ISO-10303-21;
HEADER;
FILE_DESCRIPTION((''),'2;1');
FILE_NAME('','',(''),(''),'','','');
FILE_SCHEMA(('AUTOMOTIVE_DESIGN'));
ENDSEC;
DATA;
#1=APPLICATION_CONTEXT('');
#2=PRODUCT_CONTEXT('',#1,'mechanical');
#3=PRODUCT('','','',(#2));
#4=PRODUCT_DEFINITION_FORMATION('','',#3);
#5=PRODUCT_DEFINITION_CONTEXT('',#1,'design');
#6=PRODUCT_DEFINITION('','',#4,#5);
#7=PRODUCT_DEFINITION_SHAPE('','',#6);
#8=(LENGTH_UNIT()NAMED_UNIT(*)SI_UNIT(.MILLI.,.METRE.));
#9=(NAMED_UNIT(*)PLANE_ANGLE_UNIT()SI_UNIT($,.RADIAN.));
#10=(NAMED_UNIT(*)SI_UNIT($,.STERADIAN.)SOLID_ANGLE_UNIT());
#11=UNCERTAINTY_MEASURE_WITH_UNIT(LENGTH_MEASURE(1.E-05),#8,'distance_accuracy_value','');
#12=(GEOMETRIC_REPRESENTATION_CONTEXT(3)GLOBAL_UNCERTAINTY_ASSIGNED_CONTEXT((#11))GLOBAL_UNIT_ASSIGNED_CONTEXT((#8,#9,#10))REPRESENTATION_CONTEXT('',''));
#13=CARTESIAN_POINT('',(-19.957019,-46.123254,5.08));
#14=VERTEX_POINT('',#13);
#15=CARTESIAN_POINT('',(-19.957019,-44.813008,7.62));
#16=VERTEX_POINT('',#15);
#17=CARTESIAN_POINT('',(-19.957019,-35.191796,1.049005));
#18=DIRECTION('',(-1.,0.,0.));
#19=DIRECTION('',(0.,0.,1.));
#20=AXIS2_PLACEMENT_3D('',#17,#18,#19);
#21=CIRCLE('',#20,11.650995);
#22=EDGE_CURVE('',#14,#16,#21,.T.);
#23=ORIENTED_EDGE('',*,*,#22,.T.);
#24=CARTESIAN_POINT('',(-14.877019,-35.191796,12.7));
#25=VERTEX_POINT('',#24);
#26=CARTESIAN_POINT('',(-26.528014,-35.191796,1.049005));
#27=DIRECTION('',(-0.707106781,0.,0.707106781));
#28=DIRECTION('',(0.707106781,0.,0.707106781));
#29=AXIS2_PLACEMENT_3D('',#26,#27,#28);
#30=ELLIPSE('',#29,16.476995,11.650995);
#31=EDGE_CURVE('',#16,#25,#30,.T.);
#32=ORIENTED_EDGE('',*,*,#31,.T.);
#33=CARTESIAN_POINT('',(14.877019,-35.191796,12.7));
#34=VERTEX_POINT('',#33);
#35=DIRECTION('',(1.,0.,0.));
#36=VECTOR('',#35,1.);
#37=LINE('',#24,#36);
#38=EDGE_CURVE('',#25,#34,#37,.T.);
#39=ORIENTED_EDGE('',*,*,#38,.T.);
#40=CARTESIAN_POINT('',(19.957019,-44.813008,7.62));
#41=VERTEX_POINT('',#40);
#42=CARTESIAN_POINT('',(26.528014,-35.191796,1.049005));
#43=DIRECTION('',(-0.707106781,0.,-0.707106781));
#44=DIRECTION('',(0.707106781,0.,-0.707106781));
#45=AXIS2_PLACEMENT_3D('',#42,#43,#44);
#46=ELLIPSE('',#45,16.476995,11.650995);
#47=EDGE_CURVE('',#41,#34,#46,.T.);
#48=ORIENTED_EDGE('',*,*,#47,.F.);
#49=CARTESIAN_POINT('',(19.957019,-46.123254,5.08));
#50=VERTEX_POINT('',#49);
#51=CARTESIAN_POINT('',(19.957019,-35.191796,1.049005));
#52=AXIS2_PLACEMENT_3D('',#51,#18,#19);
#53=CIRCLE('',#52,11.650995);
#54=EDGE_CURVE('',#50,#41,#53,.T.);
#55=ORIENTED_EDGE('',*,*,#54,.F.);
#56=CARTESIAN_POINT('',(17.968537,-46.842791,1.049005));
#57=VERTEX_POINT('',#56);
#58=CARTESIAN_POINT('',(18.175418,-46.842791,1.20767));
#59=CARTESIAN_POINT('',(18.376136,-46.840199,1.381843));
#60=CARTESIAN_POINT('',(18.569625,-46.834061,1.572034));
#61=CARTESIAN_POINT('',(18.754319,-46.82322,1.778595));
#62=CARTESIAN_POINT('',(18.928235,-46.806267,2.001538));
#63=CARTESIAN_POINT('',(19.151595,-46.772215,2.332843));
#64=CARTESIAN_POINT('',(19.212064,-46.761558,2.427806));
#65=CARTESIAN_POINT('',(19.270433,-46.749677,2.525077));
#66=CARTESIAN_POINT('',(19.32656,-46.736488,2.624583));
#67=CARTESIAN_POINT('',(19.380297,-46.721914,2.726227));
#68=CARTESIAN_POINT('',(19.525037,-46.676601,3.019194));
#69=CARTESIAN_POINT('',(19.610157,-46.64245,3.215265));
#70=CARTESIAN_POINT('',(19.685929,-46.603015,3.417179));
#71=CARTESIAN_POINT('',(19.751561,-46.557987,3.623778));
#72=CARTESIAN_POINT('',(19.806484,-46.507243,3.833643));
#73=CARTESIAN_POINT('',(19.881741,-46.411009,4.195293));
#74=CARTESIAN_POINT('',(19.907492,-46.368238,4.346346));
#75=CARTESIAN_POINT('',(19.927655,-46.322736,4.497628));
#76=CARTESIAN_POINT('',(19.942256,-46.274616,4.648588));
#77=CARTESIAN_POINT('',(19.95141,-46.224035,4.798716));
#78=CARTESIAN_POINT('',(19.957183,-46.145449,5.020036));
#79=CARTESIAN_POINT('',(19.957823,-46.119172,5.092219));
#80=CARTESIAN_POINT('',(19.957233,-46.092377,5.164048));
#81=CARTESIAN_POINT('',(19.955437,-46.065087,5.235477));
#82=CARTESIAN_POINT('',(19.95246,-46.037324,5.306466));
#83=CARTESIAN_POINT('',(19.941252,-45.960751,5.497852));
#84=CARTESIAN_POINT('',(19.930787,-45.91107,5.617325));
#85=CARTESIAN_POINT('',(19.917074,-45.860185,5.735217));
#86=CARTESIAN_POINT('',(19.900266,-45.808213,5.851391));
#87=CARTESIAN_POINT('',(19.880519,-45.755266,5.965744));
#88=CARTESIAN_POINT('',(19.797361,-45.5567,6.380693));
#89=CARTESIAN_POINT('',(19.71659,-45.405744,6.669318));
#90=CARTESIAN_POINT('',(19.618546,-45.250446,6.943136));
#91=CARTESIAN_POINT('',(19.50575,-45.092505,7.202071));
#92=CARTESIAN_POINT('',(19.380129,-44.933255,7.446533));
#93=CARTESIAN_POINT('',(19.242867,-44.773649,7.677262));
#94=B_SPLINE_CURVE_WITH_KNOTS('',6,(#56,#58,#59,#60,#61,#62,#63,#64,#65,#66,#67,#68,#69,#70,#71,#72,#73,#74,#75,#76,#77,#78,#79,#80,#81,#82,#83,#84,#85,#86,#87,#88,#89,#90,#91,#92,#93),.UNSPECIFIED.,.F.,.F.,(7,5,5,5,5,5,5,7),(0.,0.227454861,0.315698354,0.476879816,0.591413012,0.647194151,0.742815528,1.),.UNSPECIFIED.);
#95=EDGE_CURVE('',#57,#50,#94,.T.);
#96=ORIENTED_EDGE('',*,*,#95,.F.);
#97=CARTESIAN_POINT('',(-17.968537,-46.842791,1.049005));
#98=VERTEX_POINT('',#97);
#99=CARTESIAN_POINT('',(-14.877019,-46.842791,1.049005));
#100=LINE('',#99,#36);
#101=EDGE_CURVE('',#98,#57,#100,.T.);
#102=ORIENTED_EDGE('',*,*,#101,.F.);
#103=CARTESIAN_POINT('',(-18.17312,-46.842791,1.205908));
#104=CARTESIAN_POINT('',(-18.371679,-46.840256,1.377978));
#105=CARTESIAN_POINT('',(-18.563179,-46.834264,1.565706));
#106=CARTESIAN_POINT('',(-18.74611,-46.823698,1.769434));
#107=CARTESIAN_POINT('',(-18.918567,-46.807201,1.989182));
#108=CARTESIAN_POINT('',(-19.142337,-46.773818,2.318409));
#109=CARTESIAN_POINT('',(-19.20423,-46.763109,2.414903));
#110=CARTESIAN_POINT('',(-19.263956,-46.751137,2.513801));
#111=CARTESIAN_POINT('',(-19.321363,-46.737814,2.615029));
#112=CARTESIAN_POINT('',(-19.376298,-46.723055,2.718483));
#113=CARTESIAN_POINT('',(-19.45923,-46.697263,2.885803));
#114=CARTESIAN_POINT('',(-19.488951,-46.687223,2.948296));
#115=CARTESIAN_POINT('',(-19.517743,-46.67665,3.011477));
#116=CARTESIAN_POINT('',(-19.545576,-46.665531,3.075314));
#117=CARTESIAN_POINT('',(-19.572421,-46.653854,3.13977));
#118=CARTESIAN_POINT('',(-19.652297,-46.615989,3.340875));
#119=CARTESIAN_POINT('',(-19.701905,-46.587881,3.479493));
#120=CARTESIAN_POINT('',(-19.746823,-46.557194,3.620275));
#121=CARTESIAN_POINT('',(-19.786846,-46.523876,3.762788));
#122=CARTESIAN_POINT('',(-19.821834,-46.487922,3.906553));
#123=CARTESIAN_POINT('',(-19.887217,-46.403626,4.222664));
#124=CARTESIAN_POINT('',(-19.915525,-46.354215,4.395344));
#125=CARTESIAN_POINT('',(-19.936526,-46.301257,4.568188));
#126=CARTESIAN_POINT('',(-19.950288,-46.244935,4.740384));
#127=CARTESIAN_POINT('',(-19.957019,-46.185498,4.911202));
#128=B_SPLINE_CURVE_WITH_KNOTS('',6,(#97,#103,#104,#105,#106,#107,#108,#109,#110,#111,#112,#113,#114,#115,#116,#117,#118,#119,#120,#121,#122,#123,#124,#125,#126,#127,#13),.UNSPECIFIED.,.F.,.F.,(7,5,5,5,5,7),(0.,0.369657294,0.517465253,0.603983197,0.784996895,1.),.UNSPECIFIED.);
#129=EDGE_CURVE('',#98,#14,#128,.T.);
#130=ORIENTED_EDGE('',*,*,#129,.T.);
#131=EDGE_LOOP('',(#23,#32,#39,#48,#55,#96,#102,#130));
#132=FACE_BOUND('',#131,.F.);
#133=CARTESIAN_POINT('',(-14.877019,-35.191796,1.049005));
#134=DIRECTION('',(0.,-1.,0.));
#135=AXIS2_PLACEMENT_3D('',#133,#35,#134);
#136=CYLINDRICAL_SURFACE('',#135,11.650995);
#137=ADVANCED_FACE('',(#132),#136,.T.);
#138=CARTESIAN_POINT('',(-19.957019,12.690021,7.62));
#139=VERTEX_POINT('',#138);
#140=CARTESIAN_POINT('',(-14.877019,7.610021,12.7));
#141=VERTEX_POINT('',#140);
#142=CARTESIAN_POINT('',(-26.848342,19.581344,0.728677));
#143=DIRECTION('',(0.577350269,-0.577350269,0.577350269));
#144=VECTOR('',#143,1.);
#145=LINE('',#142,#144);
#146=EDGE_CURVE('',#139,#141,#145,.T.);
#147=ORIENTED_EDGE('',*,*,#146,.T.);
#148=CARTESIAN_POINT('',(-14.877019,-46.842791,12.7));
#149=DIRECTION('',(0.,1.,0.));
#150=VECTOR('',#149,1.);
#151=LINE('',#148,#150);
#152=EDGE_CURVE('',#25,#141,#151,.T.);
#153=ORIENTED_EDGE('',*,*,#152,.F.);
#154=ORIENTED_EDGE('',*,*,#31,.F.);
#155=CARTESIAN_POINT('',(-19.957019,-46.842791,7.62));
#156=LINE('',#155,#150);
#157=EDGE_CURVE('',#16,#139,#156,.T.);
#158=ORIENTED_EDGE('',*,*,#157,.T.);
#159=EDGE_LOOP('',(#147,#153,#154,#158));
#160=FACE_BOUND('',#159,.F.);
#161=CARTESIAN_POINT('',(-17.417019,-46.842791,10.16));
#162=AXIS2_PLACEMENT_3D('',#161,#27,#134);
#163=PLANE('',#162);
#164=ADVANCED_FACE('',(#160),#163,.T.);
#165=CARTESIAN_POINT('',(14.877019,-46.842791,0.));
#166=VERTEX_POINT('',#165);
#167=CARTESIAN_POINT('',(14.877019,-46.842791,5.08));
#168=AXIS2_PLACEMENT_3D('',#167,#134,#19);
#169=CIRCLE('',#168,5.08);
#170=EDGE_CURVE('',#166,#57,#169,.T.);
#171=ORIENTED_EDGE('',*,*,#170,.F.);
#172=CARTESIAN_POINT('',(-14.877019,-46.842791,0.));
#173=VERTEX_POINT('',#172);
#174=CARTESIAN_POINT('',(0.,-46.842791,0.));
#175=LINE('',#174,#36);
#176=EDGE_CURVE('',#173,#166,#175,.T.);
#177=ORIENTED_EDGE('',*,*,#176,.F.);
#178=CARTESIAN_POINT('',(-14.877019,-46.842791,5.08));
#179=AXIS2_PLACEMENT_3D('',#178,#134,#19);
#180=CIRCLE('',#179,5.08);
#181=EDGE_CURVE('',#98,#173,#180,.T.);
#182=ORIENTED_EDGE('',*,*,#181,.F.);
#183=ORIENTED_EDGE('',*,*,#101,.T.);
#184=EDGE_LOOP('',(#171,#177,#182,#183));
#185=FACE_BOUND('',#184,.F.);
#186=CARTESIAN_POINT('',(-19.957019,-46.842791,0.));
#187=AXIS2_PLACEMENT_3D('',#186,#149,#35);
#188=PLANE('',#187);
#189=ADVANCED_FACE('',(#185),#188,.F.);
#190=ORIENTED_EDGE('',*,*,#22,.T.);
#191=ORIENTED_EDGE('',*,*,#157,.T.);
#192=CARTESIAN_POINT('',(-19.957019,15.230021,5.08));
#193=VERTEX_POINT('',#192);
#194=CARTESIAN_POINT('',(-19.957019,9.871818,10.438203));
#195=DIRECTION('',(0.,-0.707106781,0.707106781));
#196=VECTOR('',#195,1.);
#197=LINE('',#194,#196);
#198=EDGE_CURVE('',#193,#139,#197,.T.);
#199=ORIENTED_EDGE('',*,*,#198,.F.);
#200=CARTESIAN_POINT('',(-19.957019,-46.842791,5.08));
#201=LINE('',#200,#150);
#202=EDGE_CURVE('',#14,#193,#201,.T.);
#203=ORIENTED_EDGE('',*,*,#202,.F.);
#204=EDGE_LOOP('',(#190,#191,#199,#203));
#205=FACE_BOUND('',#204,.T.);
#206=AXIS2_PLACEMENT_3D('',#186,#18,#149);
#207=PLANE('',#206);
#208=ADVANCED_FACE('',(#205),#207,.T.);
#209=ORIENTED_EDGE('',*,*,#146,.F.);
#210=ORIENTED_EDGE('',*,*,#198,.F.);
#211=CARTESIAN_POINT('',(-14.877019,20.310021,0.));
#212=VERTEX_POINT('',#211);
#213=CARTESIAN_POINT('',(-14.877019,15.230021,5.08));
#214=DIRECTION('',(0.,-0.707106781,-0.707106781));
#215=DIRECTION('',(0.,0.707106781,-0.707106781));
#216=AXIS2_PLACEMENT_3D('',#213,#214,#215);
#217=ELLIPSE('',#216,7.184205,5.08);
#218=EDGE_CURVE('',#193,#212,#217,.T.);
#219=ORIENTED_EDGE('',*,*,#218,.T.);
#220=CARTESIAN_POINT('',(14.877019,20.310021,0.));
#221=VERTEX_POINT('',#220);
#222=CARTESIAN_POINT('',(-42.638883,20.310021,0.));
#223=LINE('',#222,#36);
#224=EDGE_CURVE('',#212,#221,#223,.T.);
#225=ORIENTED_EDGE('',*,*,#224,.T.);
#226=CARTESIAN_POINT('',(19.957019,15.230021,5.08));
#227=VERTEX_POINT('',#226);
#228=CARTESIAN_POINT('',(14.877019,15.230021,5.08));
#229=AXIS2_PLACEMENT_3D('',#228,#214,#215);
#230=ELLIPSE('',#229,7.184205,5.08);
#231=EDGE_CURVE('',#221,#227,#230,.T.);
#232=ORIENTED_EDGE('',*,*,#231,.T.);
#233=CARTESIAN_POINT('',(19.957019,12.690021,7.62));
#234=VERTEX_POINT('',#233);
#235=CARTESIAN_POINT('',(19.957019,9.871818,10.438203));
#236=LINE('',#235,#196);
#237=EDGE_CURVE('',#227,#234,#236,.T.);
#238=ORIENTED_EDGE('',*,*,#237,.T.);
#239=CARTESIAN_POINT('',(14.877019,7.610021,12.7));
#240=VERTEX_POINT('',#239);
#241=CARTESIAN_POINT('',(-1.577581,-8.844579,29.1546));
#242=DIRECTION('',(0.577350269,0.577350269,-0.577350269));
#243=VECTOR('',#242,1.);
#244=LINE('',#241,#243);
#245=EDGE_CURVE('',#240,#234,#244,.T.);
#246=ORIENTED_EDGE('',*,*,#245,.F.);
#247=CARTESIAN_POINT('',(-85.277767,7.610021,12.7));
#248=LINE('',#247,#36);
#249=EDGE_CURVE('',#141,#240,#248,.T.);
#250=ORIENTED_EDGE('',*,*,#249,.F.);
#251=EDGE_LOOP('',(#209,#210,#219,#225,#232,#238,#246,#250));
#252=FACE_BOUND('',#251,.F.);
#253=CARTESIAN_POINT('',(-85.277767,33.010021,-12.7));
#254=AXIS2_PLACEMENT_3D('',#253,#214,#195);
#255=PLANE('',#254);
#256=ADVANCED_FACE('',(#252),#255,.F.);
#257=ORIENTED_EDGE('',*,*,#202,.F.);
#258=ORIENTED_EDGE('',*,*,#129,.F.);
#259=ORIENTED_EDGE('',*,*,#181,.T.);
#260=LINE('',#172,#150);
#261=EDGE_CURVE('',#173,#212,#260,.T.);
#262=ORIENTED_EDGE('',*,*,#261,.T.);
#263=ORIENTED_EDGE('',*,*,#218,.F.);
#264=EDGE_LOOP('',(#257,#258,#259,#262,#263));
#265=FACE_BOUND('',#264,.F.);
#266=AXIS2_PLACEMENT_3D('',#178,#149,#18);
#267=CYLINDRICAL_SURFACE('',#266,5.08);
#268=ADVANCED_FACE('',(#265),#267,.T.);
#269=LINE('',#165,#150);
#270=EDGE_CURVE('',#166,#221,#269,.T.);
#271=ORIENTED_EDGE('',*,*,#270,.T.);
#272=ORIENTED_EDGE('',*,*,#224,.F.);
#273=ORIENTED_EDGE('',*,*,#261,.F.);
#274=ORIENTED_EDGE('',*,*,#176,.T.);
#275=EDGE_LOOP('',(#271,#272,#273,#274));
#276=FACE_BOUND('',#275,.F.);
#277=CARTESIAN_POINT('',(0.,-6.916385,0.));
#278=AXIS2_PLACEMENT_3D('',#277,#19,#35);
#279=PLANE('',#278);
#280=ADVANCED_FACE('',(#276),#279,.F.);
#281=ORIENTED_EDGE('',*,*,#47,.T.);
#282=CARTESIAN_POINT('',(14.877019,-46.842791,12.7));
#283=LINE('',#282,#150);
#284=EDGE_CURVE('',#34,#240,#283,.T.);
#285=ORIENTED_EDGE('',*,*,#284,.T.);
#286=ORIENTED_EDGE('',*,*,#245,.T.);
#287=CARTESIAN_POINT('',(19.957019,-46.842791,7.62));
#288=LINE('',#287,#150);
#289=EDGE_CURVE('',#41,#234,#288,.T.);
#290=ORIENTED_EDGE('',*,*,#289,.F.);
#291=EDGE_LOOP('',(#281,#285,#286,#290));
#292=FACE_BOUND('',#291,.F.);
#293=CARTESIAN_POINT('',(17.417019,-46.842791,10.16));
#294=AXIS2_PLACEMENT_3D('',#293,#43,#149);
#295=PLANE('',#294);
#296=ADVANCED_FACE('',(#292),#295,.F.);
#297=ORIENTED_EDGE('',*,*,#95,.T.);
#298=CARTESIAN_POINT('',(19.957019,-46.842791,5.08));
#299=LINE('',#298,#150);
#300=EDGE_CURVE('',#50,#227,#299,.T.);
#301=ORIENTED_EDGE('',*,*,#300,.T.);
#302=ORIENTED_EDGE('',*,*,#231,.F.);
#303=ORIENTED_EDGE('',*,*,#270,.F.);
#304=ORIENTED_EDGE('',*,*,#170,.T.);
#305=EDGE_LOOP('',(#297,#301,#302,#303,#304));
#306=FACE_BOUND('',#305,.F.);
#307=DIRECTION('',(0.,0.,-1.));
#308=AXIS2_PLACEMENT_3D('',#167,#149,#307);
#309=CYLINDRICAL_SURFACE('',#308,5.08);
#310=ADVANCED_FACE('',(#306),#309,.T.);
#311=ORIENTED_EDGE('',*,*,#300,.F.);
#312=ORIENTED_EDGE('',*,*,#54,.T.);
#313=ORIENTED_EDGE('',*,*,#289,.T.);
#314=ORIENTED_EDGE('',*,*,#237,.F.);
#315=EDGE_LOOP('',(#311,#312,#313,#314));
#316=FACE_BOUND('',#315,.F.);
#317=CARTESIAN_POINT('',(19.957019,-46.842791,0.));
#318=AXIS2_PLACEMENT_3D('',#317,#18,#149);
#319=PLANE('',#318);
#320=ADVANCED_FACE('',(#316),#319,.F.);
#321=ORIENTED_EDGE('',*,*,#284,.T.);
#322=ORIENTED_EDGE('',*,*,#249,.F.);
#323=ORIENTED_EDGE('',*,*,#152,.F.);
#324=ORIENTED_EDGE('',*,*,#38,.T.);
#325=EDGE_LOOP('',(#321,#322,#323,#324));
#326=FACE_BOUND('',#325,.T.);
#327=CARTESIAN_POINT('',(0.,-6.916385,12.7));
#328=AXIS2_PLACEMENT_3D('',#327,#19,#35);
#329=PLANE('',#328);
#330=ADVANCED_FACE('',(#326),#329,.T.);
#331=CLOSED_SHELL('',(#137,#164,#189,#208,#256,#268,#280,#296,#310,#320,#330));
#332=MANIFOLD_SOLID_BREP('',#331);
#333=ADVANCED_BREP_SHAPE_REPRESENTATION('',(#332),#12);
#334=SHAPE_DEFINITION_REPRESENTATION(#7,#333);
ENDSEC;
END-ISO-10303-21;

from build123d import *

# Parameters (mm, degrees)
F0_W        = 39.9140380323
F0_H        = 79.8528119922
F1_DEPTH    = 12.7
F2_T1_DEPTH = 170.555533821
F3_R        = 5.08
F4_SIZE     = 5.08
F5_R        = 11.650994652


# Not quite as in the source:
# - a fillet or chamfer that OpenCascade refuses, or shapes differently, is made with other operations: its cross-section is extruded or revolved along the edge and cut away or added


with BuildPart() as f1:
    # F0 (on Top) → F1 (new body)
    with BuildSketch(Plane.XY):
        with Locations((0, -6.916385144)):
            Rectangle(F0_W, F0_H)
    extrude(amount=F1_DEPTH)

    # F2: chamfer of 25.4 on 1 edges, made by hand

    # F2_s2 → F2_t1 (cut)
    with BuildSketch(Plane.YZ.offset(-85.2777669105)):
        Polygon((33.0100208521, -12.7), (7.6100208521, 12.7), (33.0100208521, 12.7), align=None)
    extrude(amount=F2_T1_DEPTH, mode=Mode.SUBTRACT)

    # F3
    f3_edges = [f1.edges().sort_by_distance(p)[0] for p in [
        (19.957019, -13.266385, 0),
        (-19.957019, -13.266385, 0),
    ]]
    fillet(f3_edges, radius=F3_R)

    # F4
    f4_edges = [f1.edges().sort_by_distance(p)[0] for p in [
        (-19.957019, -19.616385, 12.7),
        (19.957019, -19.616385, 12.7),
    ]]
    chamfer(f4_edges, length=F4_SIZE)

    # F5
    f5_edges = [f1.edges().sort_by_distance(p)[0] for p in [
        (0, -46.842791, 12.7),
    ]]
    fillet(f5_edges, radius=F5_R)


solid = f1.part
